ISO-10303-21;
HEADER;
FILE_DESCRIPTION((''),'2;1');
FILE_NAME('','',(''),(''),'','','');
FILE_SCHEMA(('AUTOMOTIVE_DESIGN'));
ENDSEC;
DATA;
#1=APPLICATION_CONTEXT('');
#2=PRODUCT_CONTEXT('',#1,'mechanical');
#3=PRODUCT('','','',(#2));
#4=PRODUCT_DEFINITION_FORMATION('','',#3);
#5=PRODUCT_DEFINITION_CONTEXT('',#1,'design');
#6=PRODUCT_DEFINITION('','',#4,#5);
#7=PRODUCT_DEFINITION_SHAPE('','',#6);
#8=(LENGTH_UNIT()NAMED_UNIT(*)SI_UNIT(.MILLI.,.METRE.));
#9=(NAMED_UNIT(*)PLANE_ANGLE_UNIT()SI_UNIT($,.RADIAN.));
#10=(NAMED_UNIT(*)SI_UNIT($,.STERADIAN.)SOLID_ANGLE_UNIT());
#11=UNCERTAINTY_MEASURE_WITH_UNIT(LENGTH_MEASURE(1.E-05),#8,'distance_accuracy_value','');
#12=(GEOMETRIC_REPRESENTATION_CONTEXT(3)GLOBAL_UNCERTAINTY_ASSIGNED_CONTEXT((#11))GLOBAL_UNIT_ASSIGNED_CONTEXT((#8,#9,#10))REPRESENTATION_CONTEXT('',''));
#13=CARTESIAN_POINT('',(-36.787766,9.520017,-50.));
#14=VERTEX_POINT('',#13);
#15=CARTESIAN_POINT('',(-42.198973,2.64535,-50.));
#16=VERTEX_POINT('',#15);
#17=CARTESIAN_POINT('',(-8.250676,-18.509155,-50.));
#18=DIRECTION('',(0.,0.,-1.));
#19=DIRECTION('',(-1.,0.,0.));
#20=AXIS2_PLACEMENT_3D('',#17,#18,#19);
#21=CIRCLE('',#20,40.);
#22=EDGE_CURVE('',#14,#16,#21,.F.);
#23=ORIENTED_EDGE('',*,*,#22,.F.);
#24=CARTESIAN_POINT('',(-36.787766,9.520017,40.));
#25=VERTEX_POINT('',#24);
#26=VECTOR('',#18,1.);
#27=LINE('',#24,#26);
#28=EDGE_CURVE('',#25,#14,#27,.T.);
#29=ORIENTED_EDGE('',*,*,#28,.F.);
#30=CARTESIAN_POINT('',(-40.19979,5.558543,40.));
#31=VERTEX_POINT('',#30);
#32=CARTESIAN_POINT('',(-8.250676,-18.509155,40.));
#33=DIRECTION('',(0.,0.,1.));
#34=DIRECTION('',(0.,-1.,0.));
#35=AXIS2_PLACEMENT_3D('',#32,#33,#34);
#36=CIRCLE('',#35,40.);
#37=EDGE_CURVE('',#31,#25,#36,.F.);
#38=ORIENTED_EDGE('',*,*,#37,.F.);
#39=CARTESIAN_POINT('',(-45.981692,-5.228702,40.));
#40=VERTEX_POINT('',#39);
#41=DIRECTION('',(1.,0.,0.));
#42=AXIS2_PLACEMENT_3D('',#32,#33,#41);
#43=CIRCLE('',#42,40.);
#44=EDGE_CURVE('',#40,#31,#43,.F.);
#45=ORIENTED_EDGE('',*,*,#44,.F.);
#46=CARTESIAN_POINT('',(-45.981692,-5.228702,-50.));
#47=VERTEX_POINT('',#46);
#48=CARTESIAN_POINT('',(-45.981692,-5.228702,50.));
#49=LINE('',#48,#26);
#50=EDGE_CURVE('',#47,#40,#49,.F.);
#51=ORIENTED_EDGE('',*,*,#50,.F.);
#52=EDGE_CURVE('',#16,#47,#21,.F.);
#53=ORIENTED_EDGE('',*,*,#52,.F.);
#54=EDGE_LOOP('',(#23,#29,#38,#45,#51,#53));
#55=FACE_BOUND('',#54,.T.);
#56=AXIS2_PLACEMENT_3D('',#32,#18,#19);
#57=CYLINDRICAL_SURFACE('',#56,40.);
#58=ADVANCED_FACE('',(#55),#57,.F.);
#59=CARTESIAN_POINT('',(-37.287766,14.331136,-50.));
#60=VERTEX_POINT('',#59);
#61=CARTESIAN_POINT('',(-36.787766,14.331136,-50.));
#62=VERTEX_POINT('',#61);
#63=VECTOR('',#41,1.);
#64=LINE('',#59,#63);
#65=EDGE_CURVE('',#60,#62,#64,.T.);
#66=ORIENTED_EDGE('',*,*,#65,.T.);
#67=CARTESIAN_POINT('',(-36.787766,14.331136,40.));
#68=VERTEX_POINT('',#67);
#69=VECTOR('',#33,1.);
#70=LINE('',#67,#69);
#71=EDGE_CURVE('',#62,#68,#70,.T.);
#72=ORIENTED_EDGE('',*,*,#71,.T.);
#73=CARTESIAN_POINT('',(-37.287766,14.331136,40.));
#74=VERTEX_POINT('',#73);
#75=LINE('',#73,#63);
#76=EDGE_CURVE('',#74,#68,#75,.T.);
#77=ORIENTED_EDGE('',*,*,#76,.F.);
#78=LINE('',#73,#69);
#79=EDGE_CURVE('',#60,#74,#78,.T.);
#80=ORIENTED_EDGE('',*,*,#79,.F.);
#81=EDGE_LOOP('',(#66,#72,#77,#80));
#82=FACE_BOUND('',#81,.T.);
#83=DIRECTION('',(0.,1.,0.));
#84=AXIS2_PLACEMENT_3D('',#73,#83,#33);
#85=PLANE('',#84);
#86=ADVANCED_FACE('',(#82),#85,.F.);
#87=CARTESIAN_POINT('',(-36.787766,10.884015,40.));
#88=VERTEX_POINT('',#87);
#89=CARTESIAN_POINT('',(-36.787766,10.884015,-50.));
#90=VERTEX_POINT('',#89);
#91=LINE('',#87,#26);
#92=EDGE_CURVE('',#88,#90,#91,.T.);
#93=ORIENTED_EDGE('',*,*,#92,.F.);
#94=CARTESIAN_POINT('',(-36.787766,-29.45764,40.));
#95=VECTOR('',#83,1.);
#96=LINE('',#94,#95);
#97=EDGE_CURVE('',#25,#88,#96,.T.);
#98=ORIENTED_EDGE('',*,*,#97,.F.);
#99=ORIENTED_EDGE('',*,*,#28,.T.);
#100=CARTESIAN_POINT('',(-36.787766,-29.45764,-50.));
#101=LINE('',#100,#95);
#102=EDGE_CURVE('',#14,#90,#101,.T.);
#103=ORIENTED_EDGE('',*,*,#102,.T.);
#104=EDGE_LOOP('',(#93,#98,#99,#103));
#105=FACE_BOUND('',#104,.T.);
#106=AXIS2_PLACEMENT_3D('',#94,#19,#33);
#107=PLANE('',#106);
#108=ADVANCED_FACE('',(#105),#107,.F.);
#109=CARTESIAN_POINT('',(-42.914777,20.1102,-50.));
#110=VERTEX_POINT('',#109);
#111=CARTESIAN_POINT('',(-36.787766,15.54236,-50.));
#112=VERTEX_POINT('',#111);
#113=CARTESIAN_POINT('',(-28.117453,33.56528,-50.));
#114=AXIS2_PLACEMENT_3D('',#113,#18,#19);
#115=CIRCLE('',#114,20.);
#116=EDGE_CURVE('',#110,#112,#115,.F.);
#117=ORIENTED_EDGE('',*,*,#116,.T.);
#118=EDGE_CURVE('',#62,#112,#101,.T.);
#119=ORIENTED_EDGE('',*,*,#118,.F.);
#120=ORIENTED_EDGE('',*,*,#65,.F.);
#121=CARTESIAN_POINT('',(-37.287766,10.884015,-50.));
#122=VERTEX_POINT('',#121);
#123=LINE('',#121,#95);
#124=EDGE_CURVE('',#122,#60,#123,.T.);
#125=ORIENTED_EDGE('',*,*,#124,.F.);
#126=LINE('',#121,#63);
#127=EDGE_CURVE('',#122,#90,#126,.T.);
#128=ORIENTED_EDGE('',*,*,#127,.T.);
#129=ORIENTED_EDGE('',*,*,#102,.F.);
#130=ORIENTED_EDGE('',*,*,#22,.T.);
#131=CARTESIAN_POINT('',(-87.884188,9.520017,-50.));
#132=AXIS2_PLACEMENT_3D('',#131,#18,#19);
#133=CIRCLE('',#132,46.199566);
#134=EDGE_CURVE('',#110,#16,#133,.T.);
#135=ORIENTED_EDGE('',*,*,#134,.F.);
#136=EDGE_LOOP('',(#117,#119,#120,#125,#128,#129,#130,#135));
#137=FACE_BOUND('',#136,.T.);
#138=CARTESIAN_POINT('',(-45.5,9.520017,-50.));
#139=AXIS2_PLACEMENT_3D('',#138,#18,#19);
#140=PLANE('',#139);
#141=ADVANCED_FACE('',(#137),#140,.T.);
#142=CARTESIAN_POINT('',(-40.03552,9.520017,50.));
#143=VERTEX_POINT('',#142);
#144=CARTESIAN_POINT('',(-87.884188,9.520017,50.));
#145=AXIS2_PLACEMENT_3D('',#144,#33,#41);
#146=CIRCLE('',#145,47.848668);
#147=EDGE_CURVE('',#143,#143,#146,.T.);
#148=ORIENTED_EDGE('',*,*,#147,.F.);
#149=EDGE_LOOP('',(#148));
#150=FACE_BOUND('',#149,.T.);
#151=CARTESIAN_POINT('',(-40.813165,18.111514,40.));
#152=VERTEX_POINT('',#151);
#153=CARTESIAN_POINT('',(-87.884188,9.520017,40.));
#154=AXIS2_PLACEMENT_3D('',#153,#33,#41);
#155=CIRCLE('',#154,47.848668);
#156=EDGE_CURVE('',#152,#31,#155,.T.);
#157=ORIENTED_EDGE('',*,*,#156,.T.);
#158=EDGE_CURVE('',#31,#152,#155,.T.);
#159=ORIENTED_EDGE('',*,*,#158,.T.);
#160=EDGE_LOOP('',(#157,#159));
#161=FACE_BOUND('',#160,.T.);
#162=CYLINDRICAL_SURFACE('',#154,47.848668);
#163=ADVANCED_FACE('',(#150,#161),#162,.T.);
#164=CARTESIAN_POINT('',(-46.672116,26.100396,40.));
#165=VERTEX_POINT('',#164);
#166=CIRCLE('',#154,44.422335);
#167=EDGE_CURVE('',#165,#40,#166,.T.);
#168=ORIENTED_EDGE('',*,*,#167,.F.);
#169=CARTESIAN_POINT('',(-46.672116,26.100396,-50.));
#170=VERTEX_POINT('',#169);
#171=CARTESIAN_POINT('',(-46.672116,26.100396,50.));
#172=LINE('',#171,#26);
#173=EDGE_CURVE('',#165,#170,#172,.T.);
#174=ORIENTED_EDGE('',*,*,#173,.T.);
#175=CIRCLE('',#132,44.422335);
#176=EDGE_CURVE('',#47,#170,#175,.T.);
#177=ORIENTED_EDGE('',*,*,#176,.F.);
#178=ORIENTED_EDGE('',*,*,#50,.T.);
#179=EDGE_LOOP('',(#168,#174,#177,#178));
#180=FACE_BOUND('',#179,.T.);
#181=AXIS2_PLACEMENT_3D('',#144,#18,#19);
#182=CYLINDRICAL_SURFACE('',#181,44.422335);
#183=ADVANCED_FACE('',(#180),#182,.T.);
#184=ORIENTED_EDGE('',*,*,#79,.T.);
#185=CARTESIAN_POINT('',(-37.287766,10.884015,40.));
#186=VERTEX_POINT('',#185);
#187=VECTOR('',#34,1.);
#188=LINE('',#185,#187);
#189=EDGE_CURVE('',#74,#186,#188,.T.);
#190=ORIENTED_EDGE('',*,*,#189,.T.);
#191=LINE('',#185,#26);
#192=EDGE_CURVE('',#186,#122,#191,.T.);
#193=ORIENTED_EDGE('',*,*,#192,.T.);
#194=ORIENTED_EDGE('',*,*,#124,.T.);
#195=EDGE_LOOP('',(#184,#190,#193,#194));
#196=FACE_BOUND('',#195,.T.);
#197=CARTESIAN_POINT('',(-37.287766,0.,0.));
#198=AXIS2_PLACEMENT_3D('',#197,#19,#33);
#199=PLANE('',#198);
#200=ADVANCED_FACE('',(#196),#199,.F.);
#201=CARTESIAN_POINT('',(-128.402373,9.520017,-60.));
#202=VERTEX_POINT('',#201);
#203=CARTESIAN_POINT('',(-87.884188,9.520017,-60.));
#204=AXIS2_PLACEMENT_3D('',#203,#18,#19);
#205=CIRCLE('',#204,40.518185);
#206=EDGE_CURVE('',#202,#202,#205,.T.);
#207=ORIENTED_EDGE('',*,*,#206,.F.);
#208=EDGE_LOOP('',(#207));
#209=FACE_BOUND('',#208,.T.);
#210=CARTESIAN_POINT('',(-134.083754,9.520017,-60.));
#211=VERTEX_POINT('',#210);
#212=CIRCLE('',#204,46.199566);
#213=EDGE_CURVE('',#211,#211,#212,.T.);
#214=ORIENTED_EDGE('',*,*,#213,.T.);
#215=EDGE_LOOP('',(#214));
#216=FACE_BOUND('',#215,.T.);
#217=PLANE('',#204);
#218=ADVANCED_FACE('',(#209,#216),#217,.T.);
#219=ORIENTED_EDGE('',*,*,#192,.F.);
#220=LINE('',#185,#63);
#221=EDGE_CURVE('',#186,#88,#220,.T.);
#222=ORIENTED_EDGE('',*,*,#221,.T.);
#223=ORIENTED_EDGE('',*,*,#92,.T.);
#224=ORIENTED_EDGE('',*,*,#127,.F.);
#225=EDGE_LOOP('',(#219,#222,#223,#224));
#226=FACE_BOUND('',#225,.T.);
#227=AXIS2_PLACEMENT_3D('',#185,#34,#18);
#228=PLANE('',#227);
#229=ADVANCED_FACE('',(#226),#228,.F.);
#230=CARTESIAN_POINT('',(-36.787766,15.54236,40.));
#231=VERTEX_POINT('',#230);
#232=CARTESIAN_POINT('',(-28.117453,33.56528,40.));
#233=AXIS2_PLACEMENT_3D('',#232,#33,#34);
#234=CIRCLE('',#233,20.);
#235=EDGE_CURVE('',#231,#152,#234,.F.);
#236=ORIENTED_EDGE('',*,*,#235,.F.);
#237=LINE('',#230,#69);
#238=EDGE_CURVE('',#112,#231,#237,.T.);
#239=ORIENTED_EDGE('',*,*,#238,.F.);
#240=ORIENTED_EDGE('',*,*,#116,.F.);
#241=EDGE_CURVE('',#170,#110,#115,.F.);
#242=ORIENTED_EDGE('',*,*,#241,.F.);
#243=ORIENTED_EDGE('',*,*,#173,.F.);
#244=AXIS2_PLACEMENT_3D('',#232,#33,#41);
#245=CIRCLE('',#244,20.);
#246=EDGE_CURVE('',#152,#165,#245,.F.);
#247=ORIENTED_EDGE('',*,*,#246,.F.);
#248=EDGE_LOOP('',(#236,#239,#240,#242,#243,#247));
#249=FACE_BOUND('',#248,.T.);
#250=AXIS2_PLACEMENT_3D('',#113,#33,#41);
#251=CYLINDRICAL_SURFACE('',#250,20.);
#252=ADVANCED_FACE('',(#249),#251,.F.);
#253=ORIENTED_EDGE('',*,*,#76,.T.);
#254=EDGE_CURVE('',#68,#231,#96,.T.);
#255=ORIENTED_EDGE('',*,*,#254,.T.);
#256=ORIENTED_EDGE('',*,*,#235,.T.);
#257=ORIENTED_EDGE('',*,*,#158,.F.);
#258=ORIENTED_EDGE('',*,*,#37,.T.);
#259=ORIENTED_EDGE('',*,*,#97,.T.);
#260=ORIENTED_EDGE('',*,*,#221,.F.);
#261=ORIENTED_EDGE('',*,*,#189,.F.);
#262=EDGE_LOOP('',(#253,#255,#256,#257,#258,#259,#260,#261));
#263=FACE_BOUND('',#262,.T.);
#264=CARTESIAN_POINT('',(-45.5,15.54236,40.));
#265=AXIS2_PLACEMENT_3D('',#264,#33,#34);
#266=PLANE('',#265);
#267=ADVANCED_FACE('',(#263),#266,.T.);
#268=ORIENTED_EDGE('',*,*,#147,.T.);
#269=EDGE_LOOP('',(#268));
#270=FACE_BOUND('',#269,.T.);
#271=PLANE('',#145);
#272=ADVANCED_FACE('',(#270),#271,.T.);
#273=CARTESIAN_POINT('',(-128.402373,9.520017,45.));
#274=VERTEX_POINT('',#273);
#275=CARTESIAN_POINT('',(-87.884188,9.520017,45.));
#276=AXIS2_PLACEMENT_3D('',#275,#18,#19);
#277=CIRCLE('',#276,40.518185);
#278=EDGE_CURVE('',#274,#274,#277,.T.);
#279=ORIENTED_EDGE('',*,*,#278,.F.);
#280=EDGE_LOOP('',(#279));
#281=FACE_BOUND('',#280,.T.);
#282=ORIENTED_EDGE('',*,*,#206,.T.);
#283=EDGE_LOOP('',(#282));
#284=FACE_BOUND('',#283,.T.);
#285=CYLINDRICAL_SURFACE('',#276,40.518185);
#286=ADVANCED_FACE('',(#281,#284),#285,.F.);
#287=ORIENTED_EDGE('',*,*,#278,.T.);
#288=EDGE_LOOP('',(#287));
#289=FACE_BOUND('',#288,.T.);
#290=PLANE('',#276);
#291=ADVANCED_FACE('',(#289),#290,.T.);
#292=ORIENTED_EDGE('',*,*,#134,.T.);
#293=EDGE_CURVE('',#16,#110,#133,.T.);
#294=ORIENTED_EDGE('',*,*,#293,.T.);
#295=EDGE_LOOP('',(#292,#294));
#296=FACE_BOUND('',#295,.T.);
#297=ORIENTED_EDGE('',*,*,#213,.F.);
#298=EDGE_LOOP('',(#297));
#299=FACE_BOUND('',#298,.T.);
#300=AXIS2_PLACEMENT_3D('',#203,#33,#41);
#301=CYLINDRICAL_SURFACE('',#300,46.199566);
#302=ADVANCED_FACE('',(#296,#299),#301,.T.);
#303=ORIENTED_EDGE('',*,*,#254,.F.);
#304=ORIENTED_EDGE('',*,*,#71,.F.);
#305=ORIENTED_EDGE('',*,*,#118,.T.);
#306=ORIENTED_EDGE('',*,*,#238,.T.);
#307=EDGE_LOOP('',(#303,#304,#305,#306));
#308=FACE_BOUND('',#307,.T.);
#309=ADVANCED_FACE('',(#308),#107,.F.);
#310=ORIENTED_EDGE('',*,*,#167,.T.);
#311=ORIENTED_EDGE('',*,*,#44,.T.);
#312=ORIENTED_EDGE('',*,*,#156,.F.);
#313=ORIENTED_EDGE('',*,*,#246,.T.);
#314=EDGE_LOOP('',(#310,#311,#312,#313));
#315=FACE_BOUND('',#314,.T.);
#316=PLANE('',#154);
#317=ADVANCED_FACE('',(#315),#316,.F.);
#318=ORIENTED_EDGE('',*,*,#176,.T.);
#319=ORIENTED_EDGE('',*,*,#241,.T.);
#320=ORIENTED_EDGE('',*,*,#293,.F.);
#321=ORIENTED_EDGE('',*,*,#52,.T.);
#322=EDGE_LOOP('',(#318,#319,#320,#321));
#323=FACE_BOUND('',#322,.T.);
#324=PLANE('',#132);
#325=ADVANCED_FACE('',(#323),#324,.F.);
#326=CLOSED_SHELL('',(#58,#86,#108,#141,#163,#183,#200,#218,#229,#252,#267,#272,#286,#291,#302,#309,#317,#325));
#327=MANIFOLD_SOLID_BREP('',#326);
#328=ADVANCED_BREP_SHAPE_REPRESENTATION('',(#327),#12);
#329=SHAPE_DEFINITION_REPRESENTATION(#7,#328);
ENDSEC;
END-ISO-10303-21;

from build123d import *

# Parameters (mm, degrees)
CROQUIS1_R              = 44.422335488
SALIENTE_EXTRUIR1_DEPTH = 50
CROQUIS2_R              = 46.199565805
SALIENTE_EXTRUIR2_DEPTH = 10
CROQUIS3_R              = 47.848668402
SALIENTE_EXTRUIR3_DEPTH = 10
CROQUIS5_R              = 40.518185266
CORTAR_EXTRUIR4_DEPTH   = 105
CROQUIS8_W              = 90
CROQUIS8_H              = 6.022343016
SALIENTE_EXTRUIR4_DEPTH = 45.5
CROQUIS9_W              = 59.465557631
CROQUIS9_H              = 90
CORTAR_EXTRUIR5_DEPTH   = 45
CROQUIS10_W             = 22.822208634
CROQUIS10_H             = 90
CORTAR_EXTRUIR6_DEPTH   = 45
CROQUIS11_W             = 90
CROQUIS11_H             = 3.447121101
CORTAR_EXTRUIR7_DEPTH   = 0.5
REDONDEO1_R             = 20
REDONDEO2_R             = 40


with BuildPart() as part:
    # Croquis1 → Saliente-Extruir1 (new, symmetric)
    with BuildSketch(Plane(origin=(0, 9.520016683, 0), x_dir=(1, 0, 0), z_dir=(0, 0, 1))):
        with Locations(Location((-87.884188046, 0, 0), (0, 0, 180))):
            Circle(CROQUIS1_R)
    extrude(amount=SALIENTE_EXTRUIR1_DEPTH, both=True)

    # Croquis2 → Saliente-Extruir2 (add)
    with BuildSketch(Plane(origin=(0, 9.520016683, -50), x_dir=(-1, 0, 0), z_dir=(0, 0, -1))):
        with Locations((87.884188046, 0)):
            Circle(CROQUIS2_R)
    extrude(amount=SALIENTE_EXTRUIR2_DEPTH)

    # Croquis3 → Saliente-Extruir3 (add)
    with BuildSketch(Plane(origin=(0, 9.520016683, 50), x_dir=(1, 0, 0), z_dir=(0, 0, 1))):
        with Locations((-87.884188046, 0)):
            Circle(CROQUIS3_R)
    extrude(amount=-SALIENTE_EXTRUIR3_DEPTH)

    # Croquis5 → Cortar-Extruir4 (cut)
    with BuildSketch(Plane(origin=(0, 9.520016683, -60), x_dir=(-1, 0, 0), z_dir=(0, 0, -1))):
        with Locations((87.884188046, 0)):
            Circle(CROQUIS5_R)
    extrude(amount=-CORTAR_EXTRUIR4_DEPTH, mode=Mode.SUBTRACT)

    # Croquis8 → Saliente-Extruir4 (add, symmetric)
    with BuildSketch(Plane(origin=(0, 0, 0), x_dir=(0, 0, -1), z_dir=(1, 0, 0))):
        with Locations((5, 12.531188191)):
            Rectangle(CROQUIS8_W, CROQUIS8_H)
    extrude(amount=SALIENTE_EXTRUIR4_DEPTH, both=True)

    # Croquis9 → Cortar-Extruir5 (cut)
    with BuildSketch(Plane(origin=(0, 15.542359699, 0), x_dir=(1, 0, 0), z_dir=(0, 1, 0))):
        with Locations((15.767221184, 5)):
            Rectangle(CROQUIS9_W, CROQUIS9_H)
    extrude(amount=-CORTAR_EXTRUIR5_DEPTH, mode=Mode.SUBTRACT)

    # Croquis10 → Cortar-Extruir6 (cut)
    with BuildSketch(Plane(origin=(0, 15.542359699, 0), x_dir=(1, 0, 0), z_dir=(0, 1, 0))):
        with Locations((-25.376661948, 5)):
            Rectangle(CROQUIS10_W, CROQUIS10_H)
    extrude(amount=-CORTAR_EXTRUIR6_DEPTH, mode=Mode.SUBTRACT)

    # Croquis11 → Cortar-Extruir7 (cut)
    with BuildSketch(Plane(origin=(-36.787766265, 0, 0), x_dir=(0, 0, -1), z_dir=(1, 0, 0))):
        with Locations((5, 12.607575702)):
            Rectangle(CROQUIS11_W, CROQUIS11_H)
    extrude(amount=-CORTAR_EXTRUIR7_DEPTH, mode=Mode.SUBTRACT)

    # Redondeo1
    # the kernel refuses this fillet: 20 mm, written as the material it adds along each edge
    with BuildSketch(Plane(origin=(-43.871970711, 15.542359699, -50), x_dir=(-0.25635201555955867, 0.966583490505891, 0), z_dir=(0, 0, 1))) as redondeo1_piece_1:
        with BuildLine():
            CenterArc((13.381955248, -19.848268644), REDONDEO1_R, 97.062122585, 42.393283836)
            Line((-1.816050088, -6.847475061), (-2.120010195, -6.587459189))
            ThreePointArc((-2.120010195, -6.587459189), (-1.29465844, -3.321196724), (-0.386633396, 0.102540806))
            Line((-0.386633396, 0.102540806), (0.049178173, 0.396965373))
            ThreePointArc((0.049178173, 0.396965373), (5.46152329, 0.06298694), (10.873868406, 0.396965373))
            Line((10.873868406, 0.396965373), (10.92304658, 0))
        make_face()
    extrude(amount=90)

    # Redondeo2
    # the kernel refuses this fillet: 40 mm, written as the material it adds along each edge
    with BuildSketch(Plane(origin=(-43.461852558, 9.520016683, -50), x_dir=(1, 0, 0), z_dir=(0, 0, 1))) as redondeo2_piece_1:
        with BuildLine():
            CenterArc((35.211176648, -28.029171841), REDONDEO2_R, 135.514455154, 25.094644296)
            Line((-2.519839285, -14.748718663), (-3.274459604, -14.483109599))
            ThreePointArc((-3.274459604, -14.483109599), (-1.423064565, -7.346485792), (-0.8, 0))
            Line((-0.8, 0), (0, 0.8))
            ThreePointArc((0, 0.8), (3.337043147, 0.8), (6.103344486, 0.560583437))
            Line((6.103344486, 0.560583437), (6.674086293, 0))
        make_face()
    extrude(amount=90)


solid = part.part
